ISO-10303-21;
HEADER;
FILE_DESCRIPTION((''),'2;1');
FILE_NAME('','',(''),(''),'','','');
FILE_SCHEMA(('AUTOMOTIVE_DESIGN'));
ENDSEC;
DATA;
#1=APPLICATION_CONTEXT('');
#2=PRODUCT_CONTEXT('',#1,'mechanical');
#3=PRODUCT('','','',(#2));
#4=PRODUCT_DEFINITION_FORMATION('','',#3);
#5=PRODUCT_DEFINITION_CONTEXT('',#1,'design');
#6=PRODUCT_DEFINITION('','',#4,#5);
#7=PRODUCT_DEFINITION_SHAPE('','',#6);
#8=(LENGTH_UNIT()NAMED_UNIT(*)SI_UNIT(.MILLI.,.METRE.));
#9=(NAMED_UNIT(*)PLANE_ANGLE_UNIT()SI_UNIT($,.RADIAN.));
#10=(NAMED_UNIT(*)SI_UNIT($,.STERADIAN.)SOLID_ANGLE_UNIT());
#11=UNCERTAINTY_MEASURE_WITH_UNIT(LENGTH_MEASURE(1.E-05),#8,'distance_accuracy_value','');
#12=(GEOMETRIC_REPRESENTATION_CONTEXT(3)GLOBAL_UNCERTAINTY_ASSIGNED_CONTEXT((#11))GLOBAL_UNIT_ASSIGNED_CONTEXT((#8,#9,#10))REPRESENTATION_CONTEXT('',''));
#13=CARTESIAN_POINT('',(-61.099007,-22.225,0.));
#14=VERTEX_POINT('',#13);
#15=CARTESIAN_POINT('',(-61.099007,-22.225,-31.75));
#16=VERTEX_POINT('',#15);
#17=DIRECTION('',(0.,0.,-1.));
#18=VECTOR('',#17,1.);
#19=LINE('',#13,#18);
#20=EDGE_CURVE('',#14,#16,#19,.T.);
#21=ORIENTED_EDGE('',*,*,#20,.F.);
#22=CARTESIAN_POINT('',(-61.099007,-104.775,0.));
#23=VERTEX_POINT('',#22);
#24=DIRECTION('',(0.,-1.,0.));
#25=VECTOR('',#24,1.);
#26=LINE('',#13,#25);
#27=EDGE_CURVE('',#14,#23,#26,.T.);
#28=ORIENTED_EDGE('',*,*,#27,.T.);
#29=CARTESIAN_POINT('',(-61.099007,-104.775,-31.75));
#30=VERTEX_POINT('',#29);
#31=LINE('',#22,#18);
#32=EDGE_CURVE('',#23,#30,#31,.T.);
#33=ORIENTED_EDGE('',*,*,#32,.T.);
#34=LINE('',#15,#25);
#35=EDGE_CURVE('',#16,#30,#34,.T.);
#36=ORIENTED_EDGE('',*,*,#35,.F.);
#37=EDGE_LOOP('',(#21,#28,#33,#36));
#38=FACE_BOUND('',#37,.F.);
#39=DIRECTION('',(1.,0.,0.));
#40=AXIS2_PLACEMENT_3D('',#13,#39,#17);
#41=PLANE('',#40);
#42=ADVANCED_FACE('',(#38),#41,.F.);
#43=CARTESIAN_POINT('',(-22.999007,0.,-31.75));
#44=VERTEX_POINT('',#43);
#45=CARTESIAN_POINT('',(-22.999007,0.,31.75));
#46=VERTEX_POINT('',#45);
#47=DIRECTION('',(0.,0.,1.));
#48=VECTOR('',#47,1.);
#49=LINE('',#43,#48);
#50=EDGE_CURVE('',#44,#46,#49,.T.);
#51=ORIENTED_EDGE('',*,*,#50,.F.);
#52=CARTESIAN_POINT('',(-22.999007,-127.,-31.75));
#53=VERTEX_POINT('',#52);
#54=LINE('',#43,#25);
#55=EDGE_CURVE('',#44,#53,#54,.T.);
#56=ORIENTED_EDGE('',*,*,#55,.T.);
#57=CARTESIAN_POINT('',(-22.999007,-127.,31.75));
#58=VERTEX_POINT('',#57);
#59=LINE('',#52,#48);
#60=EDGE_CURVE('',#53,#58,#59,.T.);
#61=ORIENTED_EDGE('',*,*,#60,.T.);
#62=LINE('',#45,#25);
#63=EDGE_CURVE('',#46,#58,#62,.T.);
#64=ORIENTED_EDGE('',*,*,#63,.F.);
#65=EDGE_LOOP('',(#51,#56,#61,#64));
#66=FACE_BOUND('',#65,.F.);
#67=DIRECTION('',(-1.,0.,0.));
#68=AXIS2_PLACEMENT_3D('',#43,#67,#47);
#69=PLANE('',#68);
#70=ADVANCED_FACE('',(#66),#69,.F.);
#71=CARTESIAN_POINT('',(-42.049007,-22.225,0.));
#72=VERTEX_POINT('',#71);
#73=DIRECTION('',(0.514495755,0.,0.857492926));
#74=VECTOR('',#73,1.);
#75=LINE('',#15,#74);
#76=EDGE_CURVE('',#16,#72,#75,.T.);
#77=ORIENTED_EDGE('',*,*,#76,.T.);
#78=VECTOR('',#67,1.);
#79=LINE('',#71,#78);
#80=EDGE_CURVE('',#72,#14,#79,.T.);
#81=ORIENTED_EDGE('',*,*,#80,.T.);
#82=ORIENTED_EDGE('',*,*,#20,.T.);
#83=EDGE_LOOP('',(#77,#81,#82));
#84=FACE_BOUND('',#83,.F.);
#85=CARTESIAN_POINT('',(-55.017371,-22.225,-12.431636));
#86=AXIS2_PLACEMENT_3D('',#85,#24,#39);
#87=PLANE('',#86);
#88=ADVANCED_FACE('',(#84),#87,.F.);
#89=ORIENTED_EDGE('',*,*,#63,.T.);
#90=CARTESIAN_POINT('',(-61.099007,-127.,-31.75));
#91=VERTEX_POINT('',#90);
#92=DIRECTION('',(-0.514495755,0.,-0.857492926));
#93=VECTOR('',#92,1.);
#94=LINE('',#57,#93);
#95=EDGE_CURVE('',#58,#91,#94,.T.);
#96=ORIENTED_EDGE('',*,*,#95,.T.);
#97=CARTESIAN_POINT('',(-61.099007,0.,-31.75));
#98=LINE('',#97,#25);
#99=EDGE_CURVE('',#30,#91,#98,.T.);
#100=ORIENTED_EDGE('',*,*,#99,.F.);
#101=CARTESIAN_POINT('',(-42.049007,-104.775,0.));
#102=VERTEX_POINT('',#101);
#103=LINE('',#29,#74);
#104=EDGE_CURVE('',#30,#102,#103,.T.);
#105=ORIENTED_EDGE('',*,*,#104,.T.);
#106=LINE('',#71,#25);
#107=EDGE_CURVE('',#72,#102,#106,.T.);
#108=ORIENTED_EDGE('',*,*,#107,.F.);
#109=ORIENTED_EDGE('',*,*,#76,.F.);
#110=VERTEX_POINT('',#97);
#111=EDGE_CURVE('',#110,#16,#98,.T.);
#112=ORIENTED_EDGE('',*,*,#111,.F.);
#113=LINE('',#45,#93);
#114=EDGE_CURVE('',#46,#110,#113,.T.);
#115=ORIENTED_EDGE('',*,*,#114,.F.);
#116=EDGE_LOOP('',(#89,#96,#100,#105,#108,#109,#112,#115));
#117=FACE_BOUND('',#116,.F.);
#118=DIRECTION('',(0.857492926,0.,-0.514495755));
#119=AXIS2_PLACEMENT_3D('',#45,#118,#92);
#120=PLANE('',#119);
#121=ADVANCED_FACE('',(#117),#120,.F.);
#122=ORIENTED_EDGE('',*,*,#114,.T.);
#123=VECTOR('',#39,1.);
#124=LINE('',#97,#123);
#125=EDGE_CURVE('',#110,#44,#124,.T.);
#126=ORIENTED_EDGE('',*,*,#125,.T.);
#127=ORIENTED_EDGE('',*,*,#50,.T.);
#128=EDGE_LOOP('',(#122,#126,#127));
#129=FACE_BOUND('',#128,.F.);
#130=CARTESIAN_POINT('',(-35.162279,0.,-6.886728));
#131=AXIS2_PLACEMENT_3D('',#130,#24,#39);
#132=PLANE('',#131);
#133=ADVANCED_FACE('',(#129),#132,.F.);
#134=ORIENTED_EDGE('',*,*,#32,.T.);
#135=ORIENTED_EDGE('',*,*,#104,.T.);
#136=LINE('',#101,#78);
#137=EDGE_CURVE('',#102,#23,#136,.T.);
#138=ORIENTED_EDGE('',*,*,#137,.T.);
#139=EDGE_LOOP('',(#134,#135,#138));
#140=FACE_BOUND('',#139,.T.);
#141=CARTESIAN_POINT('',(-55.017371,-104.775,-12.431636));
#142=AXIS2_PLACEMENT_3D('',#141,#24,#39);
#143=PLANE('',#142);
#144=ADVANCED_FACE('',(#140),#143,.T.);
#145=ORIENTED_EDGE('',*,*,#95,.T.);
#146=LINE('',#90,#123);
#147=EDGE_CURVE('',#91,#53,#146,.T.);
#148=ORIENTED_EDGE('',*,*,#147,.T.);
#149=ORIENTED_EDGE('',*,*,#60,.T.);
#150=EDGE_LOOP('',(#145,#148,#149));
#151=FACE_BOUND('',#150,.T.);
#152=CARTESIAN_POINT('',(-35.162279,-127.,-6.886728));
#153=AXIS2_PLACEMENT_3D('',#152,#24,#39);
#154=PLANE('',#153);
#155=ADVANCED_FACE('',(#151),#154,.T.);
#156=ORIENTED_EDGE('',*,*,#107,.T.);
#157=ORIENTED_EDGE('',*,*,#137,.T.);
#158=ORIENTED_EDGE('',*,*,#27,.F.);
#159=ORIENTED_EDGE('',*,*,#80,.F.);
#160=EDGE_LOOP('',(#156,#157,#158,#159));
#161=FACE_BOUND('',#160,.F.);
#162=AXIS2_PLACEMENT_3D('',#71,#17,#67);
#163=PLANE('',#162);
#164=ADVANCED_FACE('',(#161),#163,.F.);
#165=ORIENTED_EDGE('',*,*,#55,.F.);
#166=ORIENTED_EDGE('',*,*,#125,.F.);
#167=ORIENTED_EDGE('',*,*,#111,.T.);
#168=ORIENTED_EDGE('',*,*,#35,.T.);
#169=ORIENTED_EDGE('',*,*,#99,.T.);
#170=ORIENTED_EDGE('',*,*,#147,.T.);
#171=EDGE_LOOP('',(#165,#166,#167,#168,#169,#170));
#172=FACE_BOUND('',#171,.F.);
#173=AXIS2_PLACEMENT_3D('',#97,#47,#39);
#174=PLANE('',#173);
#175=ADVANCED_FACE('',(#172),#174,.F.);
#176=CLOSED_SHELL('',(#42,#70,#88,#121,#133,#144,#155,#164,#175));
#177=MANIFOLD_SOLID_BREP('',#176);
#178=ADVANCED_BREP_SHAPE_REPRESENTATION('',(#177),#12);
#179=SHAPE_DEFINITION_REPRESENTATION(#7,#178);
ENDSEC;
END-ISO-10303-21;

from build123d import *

# Parameters (mm, degrees)
F1_DEPTH = 127
F2_START = 22.225
F2_DEPTH = 82.55


# Not quite as in the source:
# - a length typed as a fraction of an inch, garbled in the dataset ("3 / 203.2 mm" for 3/8 in), is restored


with BuildPart() as f1:
    # F0 (on Front) → F1 (new body)
    with BuildSketch(Plane.XZ):
        Polygon((-22.9990067312, -31.75), (-22.9990067312, 31.75), (-42.0490067312, 0), (-61.0990067312, -31.75), align=None)
    extrude(amount=F1_DEPTH)

    # F0 (on Front) → F2 (join)
    with BuildSketch(Plane.XZ.offset(F2_START)):
        Polygon((-61.0990067312, -31.75), (-42.0490067312, 0), (-61.0990067312, 0), align=None)
    extrude(amount=F2_DEPTH)


solid = f1.part
